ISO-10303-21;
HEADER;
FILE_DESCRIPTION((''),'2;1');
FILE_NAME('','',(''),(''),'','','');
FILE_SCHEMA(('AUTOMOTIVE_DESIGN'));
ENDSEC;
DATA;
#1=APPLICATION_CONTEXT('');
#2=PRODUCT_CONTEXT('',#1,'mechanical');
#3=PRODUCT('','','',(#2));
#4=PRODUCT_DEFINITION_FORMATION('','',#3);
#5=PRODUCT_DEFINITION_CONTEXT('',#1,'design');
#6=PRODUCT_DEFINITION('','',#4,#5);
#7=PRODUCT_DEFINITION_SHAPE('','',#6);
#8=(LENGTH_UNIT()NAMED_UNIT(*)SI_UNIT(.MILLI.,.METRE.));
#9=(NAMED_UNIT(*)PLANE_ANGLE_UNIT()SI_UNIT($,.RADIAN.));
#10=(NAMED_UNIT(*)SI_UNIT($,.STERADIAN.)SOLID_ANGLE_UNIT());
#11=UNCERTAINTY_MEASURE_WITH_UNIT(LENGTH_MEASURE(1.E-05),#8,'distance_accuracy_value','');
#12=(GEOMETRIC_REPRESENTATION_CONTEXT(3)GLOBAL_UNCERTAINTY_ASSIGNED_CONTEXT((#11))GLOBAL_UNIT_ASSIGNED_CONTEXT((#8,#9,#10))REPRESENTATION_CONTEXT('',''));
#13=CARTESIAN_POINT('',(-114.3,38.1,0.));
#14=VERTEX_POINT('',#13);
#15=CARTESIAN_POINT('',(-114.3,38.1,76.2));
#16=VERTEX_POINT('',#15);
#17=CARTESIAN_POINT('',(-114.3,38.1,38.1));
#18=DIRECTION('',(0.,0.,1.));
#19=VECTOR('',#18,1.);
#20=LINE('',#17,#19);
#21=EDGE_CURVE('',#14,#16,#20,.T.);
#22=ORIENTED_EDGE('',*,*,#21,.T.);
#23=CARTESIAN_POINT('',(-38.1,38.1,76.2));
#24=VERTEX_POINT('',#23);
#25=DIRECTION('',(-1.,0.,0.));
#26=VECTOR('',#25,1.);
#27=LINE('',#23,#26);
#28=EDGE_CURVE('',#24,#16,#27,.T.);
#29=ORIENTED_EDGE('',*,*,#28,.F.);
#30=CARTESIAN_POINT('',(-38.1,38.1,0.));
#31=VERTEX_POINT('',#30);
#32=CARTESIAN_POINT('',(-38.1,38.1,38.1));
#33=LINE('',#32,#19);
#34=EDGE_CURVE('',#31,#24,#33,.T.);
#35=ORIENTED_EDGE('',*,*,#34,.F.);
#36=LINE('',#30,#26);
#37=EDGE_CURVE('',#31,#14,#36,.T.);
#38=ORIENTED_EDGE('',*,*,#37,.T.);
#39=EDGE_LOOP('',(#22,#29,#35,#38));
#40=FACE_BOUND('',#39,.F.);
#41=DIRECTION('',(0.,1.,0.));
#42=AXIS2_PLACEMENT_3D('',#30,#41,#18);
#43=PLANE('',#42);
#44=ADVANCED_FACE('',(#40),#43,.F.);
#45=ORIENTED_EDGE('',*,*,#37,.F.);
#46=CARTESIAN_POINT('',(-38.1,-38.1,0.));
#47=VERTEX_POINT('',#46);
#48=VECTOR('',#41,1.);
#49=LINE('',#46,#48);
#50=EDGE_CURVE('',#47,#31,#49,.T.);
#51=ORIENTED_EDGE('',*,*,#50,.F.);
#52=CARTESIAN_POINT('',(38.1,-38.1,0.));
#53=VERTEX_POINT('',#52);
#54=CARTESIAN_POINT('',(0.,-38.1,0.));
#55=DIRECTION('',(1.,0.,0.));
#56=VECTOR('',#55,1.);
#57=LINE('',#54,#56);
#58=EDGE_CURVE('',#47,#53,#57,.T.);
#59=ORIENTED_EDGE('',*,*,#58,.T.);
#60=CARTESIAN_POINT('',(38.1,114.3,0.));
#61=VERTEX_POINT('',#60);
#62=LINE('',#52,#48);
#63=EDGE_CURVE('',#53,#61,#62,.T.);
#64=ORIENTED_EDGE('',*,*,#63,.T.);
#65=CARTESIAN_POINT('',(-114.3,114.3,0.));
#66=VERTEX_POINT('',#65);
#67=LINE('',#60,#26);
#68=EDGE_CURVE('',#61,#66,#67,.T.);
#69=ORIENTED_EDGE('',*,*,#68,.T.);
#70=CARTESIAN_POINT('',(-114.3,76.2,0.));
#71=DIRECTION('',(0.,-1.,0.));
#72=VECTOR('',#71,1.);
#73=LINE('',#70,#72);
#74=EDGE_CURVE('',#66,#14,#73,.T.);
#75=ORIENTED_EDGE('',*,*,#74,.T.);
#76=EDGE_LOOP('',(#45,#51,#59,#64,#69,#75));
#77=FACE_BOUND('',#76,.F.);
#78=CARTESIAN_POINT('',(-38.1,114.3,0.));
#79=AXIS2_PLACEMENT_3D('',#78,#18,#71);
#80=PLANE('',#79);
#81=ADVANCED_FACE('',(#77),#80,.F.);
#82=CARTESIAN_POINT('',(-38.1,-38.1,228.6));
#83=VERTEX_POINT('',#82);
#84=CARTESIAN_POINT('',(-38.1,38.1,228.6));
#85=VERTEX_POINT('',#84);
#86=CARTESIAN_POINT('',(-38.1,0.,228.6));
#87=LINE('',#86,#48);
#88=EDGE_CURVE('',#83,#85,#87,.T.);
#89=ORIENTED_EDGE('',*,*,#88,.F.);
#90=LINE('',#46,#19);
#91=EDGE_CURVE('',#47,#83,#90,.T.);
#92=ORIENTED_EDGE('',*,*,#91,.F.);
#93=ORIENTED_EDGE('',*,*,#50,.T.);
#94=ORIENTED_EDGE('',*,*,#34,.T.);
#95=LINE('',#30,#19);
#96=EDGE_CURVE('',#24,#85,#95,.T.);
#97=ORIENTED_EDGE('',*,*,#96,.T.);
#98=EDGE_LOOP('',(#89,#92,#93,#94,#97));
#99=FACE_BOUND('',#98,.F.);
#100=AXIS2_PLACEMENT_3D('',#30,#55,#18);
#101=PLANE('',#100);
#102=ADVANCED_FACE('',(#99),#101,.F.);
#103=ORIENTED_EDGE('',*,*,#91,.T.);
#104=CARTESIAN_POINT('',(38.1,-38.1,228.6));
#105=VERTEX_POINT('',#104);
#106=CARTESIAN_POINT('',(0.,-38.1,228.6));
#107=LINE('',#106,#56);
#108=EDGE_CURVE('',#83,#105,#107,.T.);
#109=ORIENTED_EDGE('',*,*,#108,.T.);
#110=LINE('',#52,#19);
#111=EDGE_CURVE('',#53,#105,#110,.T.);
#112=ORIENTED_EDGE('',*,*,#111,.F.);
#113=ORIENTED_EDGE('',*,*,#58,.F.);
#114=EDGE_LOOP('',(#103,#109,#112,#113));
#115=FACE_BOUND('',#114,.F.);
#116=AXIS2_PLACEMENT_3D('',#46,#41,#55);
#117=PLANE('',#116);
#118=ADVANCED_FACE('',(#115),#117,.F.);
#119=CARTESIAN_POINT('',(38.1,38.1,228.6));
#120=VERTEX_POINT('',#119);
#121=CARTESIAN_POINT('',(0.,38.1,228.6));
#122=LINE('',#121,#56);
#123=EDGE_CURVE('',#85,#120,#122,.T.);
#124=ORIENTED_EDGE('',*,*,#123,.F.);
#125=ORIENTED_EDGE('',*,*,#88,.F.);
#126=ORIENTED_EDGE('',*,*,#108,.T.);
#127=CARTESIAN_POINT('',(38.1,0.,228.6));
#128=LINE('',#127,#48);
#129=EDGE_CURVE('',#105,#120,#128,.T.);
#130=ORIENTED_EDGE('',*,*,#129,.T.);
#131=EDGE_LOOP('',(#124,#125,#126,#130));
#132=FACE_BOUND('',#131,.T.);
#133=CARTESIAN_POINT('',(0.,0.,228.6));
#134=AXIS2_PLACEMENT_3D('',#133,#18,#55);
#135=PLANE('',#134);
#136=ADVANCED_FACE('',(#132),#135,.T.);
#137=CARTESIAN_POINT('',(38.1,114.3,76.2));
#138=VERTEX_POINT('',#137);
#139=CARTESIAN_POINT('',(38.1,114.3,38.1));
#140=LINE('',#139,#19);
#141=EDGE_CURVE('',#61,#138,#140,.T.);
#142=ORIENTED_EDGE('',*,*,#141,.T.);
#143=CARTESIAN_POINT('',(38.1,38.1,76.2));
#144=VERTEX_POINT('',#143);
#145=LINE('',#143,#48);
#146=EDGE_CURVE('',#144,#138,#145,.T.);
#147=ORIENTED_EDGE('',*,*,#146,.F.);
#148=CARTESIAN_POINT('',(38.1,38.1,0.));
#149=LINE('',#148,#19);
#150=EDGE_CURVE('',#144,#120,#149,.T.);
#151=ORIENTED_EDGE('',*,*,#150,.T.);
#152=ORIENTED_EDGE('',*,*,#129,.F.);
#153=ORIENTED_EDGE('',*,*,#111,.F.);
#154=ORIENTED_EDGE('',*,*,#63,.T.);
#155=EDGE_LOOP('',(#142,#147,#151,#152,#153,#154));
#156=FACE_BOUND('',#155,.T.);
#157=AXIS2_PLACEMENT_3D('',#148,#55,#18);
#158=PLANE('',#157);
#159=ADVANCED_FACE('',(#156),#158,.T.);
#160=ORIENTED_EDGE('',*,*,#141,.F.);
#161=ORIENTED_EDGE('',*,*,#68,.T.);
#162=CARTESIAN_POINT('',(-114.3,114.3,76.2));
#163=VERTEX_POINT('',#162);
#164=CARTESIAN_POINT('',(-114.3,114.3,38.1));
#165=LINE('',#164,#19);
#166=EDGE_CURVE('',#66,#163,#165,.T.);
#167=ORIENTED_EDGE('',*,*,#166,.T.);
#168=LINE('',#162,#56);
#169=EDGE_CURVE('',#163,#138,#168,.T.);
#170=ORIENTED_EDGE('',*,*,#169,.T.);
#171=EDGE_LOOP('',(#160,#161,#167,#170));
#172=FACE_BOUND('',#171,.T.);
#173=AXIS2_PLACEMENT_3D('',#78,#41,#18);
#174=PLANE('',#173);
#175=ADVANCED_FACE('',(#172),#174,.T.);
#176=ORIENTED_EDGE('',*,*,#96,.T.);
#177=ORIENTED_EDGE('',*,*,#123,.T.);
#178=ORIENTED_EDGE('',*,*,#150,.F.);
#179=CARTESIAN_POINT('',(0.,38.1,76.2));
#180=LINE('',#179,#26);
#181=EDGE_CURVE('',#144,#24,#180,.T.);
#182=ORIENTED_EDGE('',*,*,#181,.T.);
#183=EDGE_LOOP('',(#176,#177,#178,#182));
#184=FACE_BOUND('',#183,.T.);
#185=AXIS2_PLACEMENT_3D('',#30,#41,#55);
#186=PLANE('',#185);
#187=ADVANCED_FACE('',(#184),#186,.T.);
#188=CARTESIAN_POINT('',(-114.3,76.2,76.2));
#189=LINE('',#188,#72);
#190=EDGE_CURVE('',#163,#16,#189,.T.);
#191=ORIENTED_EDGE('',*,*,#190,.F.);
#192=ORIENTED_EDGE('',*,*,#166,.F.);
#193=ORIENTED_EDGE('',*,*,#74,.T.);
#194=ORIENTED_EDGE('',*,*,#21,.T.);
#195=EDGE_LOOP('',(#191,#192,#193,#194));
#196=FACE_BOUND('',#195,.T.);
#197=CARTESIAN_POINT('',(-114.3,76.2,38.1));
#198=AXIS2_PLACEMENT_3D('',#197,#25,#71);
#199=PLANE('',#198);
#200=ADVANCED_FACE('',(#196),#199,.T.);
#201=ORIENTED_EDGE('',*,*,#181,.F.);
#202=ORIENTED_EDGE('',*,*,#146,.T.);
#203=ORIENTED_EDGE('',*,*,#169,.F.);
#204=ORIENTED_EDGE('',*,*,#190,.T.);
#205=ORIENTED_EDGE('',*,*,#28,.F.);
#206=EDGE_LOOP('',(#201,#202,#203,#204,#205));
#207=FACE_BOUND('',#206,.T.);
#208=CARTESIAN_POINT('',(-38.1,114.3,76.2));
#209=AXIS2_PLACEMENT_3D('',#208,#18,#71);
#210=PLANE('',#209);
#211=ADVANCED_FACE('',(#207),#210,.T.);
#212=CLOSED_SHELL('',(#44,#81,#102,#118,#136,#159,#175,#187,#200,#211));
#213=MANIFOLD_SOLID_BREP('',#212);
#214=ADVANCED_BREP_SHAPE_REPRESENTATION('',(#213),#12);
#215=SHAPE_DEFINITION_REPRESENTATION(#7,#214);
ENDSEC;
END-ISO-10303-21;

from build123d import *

# Parameters (mm, degrees)
F1_W     = 76.2
F1_H     = 76.2
F2_DEPTH = 228.6
F3_W     = 76.2
F3_H     = 76.2
F4_DEPTH = 76.2
F5_W     = 76.2
F5_H     = 76.2
F6_DEPTH = 76.2


# Not quite as in the source:
# - a variable given as a bare number and used for a length is read in inches; the dataset says mm whatever the document's units were


with BuildPart() as f2:
    # F1 (on Top) → F2 (new body)
    with BuildSketch(Plane.XY):
        Rectangle(F1_W, F1_H)
    extrude(amount=F2_DEPTH)

    # F3 (on face) → F4 (join)
    with BuildSketch(Plane(origin=(0, 38.1, 0), x_dir=(-1, 0, 0), z_dir=(0, 1, 0))):
        with Locations((0, 38.1)):
            Rectangle(F3_W, F3_H)
    extrude(amount=F4_DEPTH)

    # F5 (on face) → F6 (join)
    with BuildSketch(Plane(origin=(-38.1, 0, 0), x_dir=(0, -1, 0), z_dir=(-1, 0, 0))):
        with Locations((-76.2, 38.1)):
            Rectangle(F5_W, F5_H)
    extrude(amount=F6_DEPTH)


solid = f2.part
